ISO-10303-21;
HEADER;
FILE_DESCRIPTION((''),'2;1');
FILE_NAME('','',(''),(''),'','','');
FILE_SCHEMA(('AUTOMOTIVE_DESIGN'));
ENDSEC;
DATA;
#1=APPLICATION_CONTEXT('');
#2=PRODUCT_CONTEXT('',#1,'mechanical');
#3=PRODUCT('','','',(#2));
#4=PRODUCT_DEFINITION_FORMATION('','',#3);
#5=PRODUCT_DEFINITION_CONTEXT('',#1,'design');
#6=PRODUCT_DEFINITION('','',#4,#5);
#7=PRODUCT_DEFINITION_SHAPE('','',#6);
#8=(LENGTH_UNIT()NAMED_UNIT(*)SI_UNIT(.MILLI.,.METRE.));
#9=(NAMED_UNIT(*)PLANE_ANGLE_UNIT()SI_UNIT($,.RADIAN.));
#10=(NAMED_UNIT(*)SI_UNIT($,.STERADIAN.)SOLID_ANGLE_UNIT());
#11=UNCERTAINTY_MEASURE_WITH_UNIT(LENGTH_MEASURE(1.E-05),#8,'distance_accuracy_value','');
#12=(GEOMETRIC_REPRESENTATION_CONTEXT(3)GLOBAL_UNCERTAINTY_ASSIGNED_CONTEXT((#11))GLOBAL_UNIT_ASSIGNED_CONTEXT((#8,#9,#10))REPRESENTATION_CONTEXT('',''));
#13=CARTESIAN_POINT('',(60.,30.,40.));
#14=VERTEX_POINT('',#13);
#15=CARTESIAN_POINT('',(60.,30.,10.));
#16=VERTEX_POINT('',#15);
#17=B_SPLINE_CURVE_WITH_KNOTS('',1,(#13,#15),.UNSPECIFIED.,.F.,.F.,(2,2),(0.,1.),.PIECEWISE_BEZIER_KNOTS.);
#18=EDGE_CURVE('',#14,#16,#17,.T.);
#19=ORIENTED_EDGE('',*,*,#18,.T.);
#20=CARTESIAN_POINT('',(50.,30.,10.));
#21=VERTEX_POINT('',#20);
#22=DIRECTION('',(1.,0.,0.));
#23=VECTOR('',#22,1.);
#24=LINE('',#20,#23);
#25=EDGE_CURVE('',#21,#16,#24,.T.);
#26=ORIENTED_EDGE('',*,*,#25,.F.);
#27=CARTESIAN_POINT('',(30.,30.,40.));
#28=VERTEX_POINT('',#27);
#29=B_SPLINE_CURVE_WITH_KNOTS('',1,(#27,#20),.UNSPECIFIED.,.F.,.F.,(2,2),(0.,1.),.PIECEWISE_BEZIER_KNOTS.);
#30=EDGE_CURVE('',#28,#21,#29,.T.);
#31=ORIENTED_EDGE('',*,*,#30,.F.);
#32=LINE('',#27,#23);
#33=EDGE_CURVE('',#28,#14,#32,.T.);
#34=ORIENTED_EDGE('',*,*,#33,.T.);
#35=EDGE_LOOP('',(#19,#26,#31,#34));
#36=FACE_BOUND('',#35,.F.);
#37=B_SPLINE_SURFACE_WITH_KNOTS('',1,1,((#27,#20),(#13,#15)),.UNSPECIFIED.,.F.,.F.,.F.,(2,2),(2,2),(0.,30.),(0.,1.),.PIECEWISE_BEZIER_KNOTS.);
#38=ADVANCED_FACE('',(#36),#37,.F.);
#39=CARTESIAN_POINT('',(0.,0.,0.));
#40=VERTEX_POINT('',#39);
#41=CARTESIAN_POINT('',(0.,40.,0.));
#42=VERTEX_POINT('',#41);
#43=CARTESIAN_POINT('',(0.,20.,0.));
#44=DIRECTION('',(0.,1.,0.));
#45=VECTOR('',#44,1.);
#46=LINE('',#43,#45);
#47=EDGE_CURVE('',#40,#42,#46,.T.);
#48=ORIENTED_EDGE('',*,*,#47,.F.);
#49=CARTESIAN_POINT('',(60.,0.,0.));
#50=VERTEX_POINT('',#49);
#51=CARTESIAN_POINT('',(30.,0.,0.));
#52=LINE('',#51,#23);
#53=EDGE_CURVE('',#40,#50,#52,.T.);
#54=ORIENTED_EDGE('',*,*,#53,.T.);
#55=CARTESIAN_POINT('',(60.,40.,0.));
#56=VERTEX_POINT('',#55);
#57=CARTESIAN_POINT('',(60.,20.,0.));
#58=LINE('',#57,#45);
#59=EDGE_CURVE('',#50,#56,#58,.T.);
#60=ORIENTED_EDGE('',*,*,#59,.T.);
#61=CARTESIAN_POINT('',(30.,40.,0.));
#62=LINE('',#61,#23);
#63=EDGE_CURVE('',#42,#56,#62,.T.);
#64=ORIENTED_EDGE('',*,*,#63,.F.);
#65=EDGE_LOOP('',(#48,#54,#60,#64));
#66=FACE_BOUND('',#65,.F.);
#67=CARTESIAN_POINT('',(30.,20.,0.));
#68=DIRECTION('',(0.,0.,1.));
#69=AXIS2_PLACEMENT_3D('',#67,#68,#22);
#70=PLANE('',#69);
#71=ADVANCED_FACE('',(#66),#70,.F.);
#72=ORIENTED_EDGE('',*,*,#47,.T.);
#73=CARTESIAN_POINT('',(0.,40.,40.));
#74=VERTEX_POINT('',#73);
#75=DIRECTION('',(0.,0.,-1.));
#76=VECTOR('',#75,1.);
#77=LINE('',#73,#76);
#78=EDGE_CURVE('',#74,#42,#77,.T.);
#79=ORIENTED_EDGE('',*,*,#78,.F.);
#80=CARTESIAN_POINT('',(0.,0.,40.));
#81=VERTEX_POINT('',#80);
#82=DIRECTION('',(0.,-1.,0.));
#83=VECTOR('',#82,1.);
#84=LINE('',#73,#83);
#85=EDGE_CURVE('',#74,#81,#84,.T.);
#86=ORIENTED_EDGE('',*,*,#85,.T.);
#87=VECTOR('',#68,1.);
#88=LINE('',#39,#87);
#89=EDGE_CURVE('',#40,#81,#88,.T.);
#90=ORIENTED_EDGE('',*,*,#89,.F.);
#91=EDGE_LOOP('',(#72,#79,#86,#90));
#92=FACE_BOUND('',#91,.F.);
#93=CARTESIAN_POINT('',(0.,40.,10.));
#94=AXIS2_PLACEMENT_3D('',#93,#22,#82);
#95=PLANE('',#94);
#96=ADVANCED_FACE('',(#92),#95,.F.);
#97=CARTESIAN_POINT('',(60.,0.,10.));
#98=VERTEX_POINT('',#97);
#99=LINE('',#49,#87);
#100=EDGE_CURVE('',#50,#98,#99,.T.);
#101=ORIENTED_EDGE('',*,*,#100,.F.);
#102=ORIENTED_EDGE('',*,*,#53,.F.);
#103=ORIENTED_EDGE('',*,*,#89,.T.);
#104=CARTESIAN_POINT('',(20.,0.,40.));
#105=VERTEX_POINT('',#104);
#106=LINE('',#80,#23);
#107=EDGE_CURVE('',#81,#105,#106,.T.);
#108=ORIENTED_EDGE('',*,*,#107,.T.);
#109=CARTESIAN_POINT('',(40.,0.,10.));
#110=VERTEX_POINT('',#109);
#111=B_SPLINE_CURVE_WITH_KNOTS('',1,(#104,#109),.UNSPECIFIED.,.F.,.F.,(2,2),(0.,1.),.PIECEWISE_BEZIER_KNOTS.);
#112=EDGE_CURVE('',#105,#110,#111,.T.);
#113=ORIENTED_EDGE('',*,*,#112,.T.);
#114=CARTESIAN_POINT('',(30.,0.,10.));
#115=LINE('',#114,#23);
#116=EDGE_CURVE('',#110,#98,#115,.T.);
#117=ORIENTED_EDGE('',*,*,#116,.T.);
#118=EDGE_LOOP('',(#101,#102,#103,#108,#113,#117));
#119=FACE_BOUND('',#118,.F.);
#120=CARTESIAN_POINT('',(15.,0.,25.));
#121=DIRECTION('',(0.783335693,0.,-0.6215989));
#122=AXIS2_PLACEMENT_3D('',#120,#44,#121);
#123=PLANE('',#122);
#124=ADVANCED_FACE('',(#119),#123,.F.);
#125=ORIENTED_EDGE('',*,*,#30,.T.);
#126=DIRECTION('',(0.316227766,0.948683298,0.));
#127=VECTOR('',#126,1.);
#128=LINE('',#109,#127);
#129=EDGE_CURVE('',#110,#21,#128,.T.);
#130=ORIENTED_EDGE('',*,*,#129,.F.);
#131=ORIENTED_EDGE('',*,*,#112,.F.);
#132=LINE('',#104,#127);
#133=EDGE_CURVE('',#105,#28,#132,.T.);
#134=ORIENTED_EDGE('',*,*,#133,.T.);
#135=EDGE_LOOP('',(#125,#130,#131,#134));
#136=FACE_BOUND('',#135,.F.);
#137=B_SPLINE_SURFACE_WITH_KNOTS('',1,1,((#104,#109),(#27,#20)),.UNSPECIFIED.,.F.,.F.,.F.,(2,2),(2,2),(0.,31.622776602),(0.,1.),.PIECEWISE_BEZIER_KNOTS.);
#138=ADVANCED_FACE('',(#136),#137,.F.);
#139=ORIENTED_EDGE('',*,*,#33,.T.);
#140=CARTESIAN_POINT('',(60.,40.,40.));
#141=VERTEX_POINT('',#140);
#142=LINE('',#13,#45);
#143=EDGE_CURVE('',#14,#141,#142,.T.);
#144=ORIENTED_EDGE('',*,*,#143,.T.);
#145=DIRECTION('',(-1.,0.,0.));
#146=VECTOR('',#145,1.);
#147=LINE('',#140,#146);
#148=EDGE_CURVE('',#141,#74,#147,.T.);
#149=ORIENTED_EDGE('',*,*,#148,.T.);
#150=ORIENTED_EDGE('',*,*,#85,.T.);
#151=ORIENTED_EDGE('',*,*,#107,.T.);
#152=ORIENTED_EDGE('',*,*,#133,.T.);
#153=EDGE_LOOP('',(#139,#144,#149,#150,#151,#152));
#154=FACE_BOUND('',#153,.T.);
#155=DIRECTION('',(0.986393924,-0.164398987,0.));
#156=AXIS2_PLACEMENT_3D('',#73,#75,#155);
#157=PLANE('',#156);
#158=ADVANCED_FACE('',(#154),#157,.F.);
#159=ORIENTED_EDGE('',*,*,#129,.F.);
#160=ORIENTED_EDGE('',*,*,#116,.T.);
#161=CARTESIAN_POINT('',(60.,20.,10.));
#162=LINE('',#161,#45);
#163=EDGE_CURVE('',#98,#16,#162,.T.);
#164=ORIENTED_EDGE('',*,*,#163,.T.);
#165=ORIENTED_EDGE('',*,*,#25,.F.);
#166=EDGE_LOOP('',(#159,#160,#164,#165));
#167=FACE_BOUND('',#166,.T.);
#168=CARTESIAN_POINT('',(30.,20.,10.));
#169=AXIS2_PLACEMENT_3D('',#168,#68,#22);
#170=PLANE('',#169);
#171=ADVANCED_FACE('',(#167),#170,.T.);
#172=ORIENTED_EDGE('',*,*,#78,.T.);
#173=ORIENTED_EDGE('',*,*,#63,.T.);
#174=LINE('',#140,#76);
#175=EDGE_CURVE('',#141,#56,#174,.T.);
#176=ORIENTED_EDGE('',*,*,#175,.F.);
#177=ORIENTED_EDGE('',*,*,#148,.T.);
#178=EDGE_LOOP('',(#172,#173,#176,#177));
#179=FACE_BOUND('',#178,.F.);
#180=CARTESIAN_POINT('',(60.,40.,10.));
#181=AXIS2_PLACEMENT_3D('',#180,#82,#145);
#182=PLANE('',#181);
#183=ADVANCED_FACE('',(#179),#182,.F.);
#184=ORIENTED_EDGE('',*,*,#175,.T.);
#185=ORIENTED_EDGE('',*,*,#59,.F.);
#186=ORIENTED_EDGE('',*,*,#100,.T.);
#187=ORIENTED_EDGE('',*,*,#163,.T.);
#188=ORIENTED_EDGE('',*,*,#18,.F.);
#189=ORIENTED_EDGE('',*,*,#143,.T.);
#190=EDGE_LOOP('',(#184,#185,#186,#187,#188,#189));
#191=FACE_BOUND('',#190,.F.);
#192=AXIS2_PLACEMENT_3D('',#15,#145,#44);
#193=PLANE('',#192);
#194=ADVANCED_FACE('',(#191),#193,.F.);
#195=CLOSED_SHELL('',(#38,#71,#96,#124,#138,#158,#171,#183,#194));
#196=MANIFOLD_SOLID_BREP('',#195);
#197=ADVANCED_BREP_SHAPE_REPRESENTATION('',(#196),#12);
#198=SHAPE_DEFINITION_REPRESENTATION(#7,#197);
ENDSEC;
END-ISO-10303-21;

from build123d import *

# Parameters (mm, degrees)
F0_W     = 60
F0_H     = 40
F1_DEPTH = 10


with BuildPart() as f1:
    # F0 (on Top) → F1 (new body)
    with BuildSketch(Plane.XY):
        with Locations((30, 20)):
            Rectangle(F0_W, F0_H)
    extrude(amount=F1_DEPTH)

    # F3 (on offset) → F5 section 0
    with BuildSketch(Plane.XY.offset(40)):
        Polygon((0, 40), (0, 0), (20, 0), (30, 30), (50, 30), (60, 30), (60, 40), align=None)
    # F4 (on face) → F5 section 1
    with BuildSketch(Plane.XY.offset(10)):
        Polygon((50, 30), (60, 30), (60, 40), (0, 40), (0, 0), (40, 0), align=None)
    loft()


solid = f1.part
